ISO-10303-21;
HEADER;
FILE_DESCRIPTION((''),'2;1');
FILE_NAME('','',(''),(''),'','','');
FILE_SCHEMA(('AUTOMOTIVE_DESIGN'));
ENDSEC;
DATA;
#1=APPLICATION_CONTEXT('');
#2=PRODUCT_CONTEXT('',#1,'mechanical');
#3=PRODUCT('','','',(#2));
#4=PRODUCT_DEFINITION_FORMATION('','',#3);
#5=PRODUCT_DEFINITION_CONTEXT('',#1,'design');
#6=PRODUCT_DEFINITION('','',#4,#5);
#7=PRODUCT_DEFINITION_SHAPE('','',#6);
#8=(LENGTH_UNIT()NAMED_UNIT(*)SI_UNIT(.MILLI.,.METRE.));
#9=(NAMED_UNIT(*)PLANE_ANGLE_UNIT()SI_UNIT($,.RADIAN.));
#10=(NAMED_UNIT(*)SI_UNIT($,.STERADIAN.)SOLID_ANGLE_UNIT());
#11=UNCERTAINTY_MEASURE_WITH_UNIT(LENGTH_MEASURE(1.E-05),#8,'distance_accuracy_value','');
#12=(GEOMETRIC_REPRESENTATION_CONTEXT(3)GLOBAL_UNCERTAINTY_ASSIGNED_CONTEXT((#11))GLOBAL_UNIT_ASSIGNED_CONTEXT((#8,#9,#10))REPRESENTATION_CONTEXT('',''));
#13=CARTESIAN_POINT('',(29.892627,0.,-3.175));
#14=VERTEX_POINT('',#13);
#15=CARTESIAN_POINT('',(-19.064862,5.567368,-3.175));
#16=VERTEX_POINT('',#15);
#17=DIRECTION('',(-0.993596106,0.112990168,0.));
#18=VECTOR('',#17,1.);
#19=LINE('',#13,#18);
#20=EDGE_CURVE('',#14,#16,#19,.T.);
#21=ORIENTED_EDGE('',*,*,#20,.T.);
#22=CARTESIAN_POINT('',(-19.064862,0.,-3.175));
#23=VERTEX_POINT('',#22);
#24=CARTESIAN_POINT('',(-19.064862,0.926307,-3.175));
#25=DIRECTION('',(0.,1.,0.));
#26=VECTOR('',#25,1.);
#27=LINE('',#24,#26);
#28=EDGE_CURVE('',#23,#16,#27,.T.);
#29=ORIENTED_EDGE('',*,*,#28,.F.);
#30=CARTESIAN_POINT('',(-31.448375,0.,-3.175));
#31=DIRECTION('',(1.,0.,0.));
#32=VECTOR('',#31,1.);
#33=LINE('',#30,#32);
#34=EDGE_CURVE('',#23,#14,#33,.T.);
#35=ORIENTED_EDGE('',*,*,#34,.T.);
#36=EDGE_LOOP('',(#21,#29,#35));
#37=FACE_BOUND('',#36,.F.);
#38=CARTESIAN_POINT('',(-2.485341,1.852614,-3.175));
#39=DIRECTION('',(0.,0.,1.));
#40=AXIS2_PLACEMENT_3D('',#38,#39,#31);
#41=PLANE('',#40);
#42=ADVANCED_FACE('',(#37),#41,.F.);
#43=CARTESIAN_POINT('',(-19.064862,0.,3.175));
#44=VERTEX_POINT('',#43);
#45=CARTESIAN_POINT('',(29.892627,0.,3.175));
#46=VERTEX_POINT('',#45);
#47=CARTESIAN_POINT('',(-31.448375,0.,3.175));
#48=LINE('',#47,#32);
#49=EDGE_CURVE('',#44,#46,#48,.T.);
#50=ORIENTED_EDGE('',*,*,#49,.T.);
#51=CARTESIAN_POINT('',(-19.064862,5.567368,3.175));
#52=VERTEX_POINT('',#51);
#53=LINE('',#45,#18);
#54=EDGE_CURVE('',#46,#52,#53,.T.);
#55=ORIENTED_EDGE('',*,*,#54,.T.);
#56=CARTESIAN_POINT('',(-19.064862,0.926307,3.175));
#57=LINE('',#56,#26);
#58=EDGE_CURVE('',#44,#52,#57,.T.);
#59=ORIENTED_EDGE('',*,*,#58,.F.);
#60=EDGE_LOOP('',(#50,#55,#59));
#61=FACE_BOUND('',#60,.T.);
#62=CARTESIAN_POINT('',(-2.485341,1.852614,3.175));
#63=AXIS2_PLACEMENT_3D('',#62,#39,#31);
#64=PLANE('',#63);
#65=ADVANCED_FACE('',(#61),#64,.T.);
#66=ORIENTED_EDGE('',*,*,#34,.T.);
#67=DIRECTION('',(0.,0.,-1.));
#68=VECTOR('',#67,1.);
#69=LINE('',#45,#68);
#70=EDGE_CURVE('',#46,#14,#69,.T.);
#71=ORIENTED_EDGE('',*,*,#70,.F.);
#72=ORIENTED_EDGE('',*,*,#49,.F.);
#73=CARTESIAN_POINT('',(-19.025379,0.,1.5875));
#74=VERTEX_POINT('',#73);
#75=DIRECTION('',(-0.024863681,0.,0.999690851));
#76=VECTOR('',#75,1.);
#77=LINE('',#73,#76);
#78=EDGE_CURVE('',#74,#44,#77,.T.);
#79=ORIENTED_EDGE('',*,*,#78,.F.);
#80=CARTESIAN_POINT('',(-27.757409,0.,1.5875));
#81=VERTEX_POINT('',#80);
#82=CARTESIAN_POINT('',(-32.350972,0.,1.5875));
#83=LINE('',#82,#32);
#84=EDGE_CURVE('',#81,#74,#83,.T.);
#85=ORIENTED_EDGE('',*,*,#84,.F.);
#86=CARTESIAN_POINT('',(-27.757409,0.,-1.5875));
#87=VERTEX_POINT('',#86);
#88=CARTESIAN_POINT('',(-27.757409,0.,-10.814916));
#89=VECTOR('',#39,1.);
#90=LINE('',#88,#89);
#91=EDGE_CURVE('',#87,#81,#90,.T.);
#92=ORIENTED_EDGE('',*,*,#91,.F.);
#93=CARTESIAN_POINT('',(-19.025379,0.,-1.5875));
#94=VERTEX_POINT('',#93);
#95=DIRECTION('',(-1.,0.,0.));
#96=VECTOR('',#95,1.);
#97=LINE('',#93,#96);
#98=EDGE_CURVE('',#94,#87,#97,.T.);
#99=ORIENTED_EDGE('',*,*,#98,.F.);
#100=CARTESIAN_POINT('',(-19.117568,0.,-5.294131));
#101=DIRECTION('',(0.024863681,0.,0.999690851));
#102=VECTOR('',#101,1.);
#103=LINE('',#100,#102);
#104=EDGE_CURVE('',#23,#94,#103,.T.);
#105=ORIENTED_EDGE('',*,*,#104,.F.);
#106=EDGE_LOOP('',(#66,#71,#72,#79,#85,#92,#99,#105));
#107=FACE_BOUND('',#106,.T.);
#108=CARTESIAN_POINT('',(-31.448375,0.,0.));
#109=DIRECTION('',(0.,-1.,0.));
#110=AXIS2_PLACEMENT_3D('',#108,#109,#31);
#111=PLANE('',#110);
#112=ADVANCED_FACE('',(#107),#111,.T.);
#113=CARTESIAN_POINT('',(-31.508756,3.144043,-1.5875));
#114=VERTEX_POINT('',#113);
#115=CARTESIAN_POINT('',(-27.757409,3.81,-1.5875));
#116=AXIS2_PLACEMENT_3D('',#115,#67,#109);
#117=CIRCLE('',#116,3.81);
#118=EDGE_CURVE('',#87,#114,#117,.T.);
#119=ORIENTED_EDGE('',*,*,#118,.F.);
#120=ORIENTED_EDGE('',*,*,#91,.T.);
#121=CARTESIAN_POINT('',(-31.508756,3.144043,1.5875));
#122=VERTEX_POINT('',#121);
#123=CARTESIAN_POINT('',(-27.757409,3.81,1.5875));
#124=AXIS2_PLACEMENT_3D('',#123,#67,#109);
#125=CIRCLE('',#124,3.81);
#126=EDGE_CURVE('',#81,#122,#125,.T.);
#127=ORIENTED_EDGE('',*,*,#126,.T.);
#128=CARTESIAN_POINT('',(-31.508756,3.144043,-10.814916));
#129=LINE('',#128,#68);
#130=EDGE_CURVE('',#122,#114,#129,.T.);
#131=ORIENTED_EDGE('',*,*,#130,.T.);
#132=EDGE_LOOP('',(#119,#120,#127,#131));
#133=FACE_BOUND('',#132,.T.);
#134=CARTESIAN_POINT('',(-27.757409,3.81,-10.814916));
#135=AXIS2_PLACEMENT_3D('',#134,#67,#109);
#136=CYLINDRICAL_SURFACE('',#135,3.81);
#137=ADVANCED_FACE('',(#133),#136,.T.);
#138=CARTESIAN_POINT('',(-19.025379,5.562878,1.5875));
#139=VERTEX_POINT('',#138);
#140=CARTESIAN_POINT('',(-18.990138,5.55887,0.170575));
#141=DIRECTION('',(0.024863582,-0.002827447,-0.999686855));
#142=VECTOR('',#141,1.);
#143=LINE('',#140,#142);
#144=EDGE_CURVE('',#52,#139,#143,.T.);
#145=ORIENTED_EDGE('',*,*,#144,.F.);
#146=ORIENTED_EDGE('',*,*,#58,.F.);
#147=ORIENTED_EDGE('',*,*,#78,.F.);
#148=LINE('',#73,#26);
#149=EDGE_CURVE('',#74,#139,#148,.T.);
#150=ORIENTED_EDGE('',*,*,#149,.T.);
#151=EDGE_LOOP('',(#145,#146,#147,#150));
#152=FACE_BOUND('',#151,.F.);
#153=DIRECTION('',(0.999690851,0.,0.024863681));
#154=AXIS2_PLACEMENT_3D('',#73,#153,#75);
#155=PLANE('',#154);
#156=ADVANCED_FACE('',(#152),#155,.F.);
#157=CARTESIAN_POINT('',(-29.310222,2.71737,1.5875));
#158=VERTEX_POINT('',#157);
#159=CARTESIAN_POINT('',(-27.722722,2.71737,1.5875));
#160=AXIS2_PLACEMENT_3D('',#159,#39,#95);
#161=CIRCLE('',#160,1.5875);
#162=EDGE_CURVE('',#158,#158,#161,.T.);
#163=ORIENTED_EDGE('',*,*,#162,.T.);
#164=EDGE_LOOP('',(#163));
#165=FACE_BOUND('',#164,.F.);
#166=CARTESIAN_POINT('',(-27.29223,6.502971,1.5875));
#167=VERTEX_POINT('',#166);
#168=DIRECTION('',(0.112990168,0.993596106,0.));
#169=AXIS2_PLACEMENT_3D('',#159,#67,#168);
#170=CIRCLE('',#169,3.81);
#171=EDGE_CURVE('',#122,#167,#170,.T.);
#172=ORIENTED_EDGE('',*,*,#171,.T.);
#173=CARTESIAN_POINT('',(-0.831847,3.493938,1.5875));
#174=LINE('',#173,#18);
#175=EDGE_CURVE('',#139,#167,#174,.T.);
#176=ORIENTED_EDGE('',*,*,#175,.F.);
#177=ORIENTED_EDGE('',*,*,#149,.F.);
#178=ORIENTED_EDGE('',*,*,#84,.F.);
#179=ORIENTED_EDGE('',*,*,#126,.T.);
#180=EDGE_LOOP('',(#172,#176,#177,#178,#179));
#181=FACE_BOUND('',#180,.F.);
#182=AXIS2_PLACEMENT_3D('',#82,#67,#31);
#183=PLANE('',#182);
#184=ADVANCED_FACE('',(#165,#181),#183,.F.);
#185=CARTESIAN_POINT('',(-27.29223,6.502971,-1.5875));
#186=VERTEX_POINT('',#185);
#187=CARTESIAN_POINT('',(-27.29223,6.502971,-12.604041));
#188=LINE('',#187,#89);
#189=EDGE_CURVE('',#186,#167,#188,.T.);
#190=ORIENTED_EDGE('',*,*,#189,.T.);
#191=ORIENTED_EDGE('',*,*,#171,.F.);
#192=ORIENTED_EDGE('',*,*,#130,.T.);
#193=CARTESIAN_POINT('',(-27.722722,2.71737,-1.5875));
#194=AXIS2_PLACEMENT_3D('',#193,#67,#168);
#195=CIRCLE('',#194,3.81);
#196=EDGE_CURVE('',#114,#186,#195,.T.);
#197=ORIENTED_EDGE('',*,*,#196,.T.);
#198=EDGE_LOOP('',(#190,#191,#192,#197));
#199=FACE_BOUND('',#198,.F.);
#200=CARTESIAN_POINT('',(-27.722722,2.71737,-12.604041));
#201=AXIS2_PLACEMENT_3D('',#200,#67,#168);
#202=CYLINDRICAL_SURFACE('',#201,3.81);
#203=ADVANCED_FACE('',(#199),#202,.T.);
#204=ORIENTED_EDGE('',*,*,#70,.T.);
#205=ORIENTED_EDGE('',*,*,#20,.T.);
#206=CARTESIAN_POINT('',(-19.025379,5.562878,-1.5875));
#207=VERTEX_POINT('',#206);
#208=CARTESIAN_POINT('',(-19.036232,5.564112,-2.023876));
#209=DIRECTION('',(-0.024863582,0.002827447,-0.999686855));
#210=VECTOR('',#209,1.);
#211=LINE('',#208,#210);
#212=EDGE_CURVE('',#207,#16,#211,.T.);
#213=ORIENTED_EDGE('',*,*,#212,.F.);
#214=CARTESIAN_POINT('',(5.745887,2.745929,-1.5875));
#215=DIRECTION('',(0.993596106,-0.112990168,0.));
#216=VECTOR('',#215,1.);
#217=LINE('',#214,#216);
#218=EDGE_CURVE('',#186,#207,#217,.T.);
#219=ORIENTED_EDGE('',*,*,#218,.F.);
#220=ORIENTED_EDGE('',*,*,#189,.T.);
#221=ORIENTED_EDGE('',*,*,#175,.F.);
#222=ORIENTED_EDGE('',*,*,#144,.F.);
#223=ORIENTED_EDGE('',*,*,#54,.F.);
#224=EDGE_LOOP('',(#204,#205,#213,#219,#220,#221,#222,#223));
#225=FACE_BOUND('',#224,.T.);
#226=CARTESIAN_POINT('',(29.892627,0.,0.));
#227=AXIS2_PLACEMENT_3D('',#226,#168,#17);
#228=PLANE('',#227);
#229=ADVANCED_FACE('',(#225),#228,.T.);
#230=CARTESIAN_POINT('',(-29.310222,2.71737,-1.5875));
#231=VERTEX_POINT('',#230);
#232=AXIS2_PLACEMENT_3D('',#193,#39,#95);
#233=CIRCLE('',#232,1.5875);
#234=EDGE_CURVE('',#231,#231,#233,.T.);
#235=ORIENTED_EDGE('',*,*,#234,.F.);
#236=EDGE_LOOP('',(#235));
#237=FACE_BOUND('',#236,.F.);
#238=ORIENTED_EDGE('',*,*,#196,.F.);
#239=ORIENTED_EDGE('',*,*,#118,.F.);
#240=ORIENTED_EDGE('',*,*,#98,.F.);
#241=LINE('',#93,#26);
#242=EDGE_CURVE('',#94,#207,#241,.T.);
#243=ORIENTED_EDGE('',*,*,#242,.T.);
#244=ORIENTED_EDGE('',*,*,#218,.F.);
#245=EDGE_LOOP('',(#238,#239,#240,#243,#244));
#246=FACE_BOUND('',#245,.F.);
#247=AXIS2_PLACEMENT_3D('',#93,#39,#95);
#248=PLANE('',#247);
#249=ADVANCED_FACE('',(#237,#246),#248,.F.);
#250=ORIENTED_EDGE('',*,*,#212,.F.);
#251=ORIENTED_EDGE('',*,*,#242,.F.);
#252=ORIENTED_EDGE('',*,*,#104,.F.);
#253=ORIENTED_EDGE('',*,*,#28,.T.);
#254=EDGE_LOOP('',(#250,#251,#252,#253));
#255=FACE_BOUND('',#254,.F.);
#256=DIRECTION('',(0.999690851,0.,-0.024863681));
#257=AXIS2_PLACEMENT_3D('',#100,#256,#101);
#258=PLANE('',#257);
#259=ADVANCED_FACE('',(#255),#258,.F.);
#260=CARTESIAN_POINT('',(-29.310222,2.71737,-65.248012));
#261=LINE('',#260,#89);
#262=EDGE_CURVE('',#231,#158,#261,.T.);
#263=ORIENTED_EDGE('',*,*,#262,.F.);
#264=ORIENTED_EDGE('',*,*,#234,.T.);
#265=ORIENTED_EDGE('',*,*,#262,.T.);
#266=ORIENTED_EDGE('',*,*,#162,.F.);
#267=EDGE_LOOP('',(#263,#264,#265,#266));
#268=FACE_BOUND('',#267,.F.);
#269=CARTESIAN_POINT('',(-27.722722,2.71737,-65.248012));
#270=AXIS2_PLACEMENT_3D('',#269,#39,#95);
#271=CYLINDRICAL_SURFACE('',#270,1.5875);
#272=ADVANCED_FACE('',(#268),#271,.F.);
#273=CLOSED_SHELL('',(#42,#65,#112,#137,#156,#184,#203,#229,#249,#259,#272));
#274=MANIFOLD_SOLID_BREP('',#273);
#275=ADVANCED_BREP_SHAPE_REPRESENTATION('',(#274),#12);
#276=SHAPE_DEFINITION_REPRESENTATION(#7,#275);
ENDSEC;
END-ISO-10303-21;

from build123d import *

# Parameters (mm, degrees)
F1_DEPTH    = 3.175
F3_DEPTH    = 25.4
F4_T1_DEPTH = 21.629832931
F4_T3_DEPTH = 25.208081251
F6_D        = 3.175


# Not quite as in the source:
# - a fillet or chamfer that OpenCascade refuses, or shapes differently, is made with other operations: its cross-section is extruded or revolved along the edge and cut away or added


with BuildPart() as f1:
    # F0 (on Top) → F1 (new body, symmetric)
    with BuildSketch(Plane.XY):
        Polygon((-31.6706262529, 7.0008751936), (-31.4483754337, 0), (29.8926271498, 0), align=None)
    extrude(amount=F1_DEPTH, both=True)

    # F2 (on Front) → F3 (cut)
    with BuildSketch(Plane.XZ):
        Polygon((-32.3509715194, 5.2941306494), (-32.3509715194, 1.5875), (-19.0253787046, 1.5875), (-19.1175676882, 5.2941306494), align=None)
        Polygon((-19.0253787046, -1.5875), (-32.3509715194, -1.5875), (-32.3509715194, -5.2941306494), (-19.1175676882, -5.2941306494), align=None)
    extrude(amount=-F3_DEPTH, mode=Mode.SUBTRACT)

    # F4: fillet of radius 3.81 on 2 edges, made by hand

    # F4_s2 → F4_t1 (cut)
    with BuildSketch(Plane.XY.offset(-10.8149164655)):
        with BuildLine():
            ThreePointArc((-27.7574088475, 0), (-30.4083993967, 1.0735151913), (-31.5654904043, 3.6891080797))
            Line((-31.5654904043, 3.6891080797), (-31.4483754337, 0))
            Line((-31.4483754337, 0), (-27.7574088475, 0))
        make_face()
    extrude(amount=F4_T1_DEPTH, mode=Mode.SUBTRACT)

    # F4_s4 → F4_t3 (cut)
    with BuildSketch(Plane.XY.offset(-12.6040406255)):
        with BuildLine():
            ThreePointArc((-27.2922295058, 6.5029708841), (-30.3048140162, 5.5189587428), (-31.5308036019, 2.5964777998))
            Line((-31.5308036019, 2.5964777998), (-31.6706262529, 7.0008751936))
            Line((-31.6706262529, 7.0008751936), (-27.2922295058, 6.5029708841))
        make_face()
    extrude(amount=F4_T3_DEPTH, mode=Mode.SUBTRACT)

    # F6 (through all)
    with Locations(Plane(origin=(0, 0, -3.175), x_dir=(1, 0, 0), z_dir=(0, 0, -1))):
        with Locations((-27.722722045, -2.71736972)):
            Hole(F6_D / 2)


solid = f1.part
